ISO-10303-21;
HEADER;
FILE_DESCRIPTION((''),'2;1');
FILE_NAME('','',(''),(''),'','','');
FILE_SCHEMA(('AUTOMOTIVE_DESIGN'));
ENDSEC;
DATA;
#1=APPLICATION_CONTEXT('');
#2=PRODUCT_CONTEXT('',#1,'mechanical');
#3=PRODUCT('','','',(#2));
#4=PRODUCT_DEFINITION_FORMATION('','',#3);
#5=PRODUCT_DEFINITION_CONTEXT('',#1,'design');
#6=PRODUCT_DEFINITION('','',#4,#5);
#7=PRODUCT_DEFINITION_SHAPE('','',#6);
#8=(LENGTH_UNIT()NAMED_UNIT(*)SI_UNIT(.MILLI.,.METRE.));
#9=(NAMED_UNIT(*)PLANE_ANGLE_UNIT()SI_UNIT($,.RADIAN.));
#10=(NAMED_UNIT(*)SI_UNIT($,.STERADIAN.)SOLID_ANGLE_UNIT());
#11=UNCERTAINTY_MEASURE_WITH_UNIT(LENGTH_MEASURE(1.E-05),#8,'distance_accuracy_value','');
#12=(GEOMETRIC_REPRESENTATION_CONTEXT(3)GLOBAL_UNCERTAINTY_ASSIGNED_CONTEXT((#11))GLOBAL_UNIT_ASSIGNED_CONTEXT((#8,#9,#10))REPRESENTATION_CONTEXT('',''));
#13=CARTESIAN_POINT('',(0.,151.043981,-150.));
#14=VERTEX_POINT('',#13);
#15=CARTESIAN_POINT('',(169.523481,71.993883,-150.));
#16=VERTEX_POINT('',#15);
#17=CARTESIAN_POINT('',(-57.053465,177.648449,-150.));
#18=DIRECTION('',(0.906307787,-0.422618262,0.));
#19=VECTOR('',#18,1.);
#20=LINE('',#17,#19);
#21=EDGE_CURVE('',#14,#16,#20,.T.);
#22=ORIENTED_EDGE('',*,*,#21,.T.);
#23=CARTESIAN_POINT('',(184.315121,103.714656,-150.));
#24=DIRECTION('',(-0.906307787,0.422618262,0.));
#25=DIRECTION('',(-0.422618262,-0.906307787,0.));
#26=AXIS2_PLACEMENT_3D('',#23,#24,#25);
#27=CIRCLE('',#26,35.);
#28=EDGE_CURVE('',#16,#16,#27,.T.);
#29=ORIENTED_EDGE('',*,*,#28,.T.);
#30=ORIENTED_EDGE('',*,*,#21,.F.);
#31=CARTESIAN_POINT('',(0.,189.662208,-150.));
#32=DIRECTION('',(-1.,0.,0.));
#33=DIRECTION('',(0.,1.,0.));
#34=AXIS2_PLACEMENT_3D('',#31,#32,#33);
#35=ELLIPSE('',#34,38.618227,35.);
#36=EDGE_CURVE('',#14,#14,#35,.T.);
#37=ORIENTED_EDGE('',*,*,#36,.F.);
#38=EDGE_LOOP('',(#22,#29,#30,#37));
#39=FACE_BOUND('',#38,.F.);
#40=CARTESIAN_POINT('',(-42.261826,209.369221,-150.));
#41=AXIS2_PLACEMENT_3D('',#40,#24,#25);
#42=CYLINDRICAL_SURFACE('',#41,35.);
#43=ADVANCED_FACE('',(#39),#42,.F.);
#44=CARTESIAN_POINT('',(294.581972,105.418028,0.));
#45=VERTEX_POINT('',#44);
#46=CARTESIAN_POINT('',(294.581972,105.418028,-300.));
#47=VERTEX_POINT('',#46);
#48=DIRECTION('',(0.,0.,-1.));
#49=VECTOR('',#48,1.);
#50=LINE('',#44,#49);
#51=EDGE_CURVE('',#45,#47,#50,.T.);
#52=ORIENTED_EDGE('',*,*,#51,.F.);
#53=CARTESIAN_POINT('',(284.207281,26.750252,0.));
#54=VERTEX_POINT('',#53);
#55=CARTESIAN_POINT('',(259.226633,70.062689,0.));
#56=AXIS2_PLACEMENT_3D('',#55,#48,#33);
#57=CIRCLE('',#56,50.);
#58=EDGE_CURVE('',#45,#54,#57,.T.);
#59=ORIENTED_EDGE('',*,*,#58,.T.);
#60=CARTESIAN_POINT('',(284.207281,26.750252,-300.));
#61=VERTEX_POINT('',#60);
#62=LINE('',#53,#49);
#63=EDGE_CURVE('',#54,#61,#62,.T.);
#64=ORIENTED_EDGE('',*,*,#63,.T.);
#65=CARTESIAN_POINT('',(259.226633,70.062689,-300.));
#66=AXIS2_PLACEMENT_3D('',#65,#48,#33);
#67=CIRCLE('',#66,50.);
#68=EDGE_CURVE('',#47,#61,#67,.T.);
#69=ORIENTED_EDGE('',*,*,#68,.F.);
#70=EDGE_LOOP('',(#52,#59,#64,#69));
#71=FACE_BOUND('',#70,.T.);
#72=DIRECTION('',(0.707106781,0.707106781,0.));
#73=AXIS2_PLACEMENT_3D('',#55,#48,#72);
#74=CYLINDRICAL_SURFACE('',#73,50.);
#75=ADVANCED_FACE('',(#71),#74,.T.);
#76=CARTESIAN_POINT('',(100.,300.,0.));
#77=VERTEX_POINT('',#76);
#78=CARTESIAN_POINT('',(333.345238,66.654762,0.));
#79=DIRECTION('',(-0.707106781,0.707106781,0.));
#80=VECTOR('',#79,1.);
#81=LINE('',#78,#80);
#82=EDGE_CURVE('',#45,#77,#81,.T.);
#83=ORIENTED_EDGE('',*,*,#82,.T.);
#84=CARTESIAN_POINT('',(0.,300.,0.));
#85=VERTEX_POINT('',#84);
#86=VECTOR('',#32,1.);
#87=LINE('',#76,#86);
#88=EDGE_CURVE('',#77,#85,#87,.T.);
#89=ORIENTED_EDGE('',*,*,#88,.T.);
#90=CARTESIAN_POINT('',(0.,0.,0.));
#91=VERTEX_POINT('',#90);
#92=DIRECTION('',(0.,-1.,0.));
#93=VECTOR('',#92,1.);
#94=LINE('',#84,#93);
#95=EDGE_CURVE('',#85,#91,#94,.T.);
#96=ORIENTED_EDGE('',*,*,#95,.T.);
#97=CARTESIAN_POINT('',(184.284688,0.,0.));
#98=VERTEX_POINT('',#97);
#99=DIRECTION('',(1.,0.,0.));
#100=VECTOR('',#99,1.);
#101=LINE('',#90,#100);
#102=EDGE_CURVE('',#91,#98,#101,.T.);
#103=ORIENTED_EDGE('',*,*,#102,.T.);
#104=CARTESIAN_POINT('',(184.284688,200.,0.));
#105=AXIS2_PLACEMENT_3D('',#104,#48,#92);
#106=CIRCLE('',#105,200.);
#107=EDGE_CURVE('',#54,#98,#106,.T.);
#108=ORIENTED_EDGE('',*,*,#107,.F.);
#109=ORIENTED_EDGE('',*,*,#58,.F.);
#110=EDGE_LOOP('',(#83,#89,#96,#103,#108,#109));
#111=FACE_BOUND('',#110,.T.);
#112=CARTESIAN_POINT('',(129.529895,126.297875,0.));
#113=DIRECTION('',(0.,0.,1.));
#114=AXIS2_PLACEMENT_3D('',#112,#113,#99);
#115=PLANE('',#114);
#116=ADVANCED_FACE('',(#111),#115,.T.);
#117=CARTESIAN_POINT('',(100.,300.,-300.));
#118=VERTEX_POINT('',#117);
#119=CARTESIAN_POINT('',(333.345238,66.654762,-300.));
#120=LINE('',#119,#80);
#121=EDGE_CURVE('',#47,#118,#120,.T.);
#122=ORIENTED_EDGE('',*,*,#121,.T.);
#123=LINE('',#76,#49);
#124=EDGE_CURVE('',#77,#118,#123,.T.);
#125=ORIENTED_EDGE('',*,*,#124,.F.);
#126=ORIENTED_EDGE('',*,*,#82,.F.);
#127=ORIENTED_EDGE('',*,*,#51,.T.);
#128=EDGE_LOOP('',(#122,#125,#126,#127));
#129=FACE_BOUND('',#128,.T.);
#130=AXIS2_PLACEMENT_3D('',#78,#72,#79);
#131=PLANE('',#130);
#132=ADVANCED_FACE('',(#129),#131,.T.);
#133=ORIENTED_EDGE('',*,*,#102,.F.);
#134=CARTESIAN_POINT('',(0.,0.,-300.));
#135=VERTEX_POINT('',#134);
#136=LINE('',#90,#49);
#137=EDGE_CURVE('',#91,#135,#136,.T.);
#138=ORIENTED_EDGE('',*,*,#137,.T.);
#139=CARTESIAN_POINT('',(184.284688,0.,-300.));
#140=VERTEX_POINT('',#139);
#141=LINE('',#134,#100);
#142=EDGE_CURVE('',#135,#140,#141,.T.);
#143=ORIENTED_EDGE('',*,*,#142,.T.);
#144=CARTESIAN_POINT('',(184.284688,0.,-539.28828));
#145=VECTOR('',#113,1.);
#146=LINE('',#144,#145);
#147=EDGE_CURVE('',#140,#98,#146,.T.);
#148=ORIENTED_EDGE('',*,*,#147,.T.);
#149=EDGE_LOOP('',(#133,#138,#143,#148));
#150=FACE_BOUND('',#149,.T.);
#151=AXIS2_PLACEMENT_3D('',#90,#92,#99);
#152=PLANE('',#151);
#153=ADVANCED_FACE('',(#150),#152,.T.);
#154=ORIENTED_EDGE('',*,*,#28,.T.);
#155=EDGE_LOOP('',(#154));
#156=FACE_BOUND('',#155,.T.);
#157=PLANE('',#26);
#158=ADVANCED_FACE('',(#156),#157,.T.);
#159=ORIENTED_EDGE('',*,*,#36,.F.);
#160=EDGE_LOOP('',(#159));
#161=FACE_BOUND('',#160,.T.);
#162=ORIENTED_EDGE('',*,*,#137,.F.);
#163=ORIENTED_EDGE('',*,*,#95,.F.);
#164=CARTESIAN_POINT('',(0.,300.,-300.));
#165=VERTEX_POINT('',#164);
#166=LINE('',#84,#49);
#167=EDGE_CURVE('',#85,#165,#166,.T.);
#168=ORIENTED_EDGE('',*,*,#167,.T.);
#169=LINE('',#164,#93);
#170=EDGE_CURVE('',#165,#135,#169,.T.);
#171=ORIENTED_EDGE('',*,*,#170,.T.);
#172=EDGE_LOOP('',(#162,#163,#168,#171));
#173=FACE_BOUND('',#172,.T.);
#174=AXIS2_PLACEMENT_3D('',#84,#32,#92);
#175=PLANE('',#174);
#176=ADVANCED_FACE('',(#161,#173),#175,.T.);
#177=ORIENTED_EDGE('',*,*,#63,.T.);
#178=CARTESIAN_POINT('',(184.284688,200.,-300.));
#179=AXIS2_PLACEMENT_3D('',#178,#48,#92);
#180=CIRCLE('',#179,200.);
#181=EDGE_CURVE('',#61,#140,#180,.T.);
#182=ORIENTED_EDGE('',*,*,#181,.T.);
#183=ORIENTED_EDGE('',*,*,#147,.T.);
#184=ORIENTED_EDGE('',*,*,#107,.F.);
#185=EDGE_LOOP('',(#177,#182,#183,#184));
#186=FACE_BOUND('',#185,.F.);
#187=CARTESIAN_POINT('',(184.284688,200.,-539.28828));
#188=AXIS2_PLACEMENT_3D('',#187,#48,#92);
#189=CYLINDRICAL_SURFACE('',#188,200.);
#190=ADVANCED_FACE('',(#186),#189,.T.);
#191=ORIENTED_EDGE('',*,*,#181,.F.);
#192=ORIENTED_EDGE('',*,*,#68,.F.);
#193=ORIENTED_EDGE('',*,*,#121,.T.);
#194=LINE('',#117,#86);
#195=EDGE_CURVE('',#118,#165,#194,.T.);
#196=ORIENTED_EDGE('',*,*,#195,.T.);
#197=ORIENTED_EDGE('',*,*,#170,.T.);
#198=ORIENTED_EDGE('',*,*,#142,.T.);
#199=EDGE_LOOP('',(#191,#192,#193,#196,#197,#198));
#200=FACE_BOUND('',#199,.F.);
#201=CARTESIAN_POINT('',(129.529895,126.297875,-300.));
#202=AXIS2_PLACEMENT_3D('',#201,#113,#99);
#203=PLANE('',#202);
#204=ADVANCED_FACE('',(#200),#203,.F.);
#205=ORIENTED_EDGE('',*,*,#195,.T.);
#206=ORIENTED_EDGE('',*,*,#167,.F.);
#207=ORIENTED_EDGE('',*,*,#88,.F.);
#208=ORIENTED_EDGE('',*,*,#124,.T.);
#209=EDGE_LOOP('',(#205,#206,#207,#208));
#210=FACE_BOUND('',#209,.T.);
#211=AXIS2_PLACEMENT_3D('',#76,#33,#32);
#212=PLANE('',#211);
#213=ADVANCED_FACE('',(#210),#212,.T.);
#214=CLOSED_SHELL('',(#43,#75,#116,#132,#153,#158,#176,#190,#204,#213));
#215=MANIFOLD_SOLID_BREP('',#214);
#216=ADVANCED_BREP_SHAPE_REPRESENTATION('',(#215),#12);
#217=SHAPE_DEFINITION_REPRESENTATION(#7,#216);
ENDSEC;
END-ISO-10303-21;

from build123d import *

# Parameters (mm, degrees)
F1_DEPTH    = 300
F2_T1_DEPTH = 778.5765609082
F3_R        = 50
F5_R        = 35
F6_DEPTH    = 250


# Not quite as in the source:
# - a fillet or chamfer that OpenCascade refuses, or shapes differently, is made with other operations: its cross-section is extruded or revolved along the edge and cut away or added


with BuildPart() as f1:
    # F0 (on Top) → F1 (new body)
    with BuildSketch(Plane.XY):
        Polygon((0, 300), (0, 0), (280, 0), (333.3452377916, 66.6547622084), (100, 300), align=None)
    extrude(amount=-F1_DEPTH)

    # F2: fillet of radius 200 on 1 edges, made by hand

    # F2_s2 → F2_t1 (cut)
    with BuildSketch(Plane.XY.offset(-539.2882804541)):
        with BuildLine():
            ThreePointArc((184.2846878184, 0), (265.9270556236, 17.4225540239), (333.3452377916, 66.6547622084))
            Line((333.3452377916, 66.6547622084), (280, 0))
            Line((280, 0), (184.2846878184, 0))
        make_face()
    extrude(amount=F2_T1_DEPTH, mode=Mode.SUBTRACT)

    # F3
    f3_edges = [f1.edges().sort_by_distance(p)[0] for p in [
        (333.345238, 66.654762, -150),
    ]]
    fillet(f3_edges, radius=F3_R)

    # F5 (on face) → F6 (cut)
    with BuildSketch(Plane(origin=(-114.9066664678, 53.581858547, 0), x_dir=(-0.4226182617, -0.906307787, 0), z_dir=(-0.906307787, 0.4226182617, 0))):
        with Locations((-171.892336111, -150)):
            Circle(F5_R)
    extrude(amount=-F6_DEPTH, mode=Mode.SUBTRACT)


solid = f1.part
